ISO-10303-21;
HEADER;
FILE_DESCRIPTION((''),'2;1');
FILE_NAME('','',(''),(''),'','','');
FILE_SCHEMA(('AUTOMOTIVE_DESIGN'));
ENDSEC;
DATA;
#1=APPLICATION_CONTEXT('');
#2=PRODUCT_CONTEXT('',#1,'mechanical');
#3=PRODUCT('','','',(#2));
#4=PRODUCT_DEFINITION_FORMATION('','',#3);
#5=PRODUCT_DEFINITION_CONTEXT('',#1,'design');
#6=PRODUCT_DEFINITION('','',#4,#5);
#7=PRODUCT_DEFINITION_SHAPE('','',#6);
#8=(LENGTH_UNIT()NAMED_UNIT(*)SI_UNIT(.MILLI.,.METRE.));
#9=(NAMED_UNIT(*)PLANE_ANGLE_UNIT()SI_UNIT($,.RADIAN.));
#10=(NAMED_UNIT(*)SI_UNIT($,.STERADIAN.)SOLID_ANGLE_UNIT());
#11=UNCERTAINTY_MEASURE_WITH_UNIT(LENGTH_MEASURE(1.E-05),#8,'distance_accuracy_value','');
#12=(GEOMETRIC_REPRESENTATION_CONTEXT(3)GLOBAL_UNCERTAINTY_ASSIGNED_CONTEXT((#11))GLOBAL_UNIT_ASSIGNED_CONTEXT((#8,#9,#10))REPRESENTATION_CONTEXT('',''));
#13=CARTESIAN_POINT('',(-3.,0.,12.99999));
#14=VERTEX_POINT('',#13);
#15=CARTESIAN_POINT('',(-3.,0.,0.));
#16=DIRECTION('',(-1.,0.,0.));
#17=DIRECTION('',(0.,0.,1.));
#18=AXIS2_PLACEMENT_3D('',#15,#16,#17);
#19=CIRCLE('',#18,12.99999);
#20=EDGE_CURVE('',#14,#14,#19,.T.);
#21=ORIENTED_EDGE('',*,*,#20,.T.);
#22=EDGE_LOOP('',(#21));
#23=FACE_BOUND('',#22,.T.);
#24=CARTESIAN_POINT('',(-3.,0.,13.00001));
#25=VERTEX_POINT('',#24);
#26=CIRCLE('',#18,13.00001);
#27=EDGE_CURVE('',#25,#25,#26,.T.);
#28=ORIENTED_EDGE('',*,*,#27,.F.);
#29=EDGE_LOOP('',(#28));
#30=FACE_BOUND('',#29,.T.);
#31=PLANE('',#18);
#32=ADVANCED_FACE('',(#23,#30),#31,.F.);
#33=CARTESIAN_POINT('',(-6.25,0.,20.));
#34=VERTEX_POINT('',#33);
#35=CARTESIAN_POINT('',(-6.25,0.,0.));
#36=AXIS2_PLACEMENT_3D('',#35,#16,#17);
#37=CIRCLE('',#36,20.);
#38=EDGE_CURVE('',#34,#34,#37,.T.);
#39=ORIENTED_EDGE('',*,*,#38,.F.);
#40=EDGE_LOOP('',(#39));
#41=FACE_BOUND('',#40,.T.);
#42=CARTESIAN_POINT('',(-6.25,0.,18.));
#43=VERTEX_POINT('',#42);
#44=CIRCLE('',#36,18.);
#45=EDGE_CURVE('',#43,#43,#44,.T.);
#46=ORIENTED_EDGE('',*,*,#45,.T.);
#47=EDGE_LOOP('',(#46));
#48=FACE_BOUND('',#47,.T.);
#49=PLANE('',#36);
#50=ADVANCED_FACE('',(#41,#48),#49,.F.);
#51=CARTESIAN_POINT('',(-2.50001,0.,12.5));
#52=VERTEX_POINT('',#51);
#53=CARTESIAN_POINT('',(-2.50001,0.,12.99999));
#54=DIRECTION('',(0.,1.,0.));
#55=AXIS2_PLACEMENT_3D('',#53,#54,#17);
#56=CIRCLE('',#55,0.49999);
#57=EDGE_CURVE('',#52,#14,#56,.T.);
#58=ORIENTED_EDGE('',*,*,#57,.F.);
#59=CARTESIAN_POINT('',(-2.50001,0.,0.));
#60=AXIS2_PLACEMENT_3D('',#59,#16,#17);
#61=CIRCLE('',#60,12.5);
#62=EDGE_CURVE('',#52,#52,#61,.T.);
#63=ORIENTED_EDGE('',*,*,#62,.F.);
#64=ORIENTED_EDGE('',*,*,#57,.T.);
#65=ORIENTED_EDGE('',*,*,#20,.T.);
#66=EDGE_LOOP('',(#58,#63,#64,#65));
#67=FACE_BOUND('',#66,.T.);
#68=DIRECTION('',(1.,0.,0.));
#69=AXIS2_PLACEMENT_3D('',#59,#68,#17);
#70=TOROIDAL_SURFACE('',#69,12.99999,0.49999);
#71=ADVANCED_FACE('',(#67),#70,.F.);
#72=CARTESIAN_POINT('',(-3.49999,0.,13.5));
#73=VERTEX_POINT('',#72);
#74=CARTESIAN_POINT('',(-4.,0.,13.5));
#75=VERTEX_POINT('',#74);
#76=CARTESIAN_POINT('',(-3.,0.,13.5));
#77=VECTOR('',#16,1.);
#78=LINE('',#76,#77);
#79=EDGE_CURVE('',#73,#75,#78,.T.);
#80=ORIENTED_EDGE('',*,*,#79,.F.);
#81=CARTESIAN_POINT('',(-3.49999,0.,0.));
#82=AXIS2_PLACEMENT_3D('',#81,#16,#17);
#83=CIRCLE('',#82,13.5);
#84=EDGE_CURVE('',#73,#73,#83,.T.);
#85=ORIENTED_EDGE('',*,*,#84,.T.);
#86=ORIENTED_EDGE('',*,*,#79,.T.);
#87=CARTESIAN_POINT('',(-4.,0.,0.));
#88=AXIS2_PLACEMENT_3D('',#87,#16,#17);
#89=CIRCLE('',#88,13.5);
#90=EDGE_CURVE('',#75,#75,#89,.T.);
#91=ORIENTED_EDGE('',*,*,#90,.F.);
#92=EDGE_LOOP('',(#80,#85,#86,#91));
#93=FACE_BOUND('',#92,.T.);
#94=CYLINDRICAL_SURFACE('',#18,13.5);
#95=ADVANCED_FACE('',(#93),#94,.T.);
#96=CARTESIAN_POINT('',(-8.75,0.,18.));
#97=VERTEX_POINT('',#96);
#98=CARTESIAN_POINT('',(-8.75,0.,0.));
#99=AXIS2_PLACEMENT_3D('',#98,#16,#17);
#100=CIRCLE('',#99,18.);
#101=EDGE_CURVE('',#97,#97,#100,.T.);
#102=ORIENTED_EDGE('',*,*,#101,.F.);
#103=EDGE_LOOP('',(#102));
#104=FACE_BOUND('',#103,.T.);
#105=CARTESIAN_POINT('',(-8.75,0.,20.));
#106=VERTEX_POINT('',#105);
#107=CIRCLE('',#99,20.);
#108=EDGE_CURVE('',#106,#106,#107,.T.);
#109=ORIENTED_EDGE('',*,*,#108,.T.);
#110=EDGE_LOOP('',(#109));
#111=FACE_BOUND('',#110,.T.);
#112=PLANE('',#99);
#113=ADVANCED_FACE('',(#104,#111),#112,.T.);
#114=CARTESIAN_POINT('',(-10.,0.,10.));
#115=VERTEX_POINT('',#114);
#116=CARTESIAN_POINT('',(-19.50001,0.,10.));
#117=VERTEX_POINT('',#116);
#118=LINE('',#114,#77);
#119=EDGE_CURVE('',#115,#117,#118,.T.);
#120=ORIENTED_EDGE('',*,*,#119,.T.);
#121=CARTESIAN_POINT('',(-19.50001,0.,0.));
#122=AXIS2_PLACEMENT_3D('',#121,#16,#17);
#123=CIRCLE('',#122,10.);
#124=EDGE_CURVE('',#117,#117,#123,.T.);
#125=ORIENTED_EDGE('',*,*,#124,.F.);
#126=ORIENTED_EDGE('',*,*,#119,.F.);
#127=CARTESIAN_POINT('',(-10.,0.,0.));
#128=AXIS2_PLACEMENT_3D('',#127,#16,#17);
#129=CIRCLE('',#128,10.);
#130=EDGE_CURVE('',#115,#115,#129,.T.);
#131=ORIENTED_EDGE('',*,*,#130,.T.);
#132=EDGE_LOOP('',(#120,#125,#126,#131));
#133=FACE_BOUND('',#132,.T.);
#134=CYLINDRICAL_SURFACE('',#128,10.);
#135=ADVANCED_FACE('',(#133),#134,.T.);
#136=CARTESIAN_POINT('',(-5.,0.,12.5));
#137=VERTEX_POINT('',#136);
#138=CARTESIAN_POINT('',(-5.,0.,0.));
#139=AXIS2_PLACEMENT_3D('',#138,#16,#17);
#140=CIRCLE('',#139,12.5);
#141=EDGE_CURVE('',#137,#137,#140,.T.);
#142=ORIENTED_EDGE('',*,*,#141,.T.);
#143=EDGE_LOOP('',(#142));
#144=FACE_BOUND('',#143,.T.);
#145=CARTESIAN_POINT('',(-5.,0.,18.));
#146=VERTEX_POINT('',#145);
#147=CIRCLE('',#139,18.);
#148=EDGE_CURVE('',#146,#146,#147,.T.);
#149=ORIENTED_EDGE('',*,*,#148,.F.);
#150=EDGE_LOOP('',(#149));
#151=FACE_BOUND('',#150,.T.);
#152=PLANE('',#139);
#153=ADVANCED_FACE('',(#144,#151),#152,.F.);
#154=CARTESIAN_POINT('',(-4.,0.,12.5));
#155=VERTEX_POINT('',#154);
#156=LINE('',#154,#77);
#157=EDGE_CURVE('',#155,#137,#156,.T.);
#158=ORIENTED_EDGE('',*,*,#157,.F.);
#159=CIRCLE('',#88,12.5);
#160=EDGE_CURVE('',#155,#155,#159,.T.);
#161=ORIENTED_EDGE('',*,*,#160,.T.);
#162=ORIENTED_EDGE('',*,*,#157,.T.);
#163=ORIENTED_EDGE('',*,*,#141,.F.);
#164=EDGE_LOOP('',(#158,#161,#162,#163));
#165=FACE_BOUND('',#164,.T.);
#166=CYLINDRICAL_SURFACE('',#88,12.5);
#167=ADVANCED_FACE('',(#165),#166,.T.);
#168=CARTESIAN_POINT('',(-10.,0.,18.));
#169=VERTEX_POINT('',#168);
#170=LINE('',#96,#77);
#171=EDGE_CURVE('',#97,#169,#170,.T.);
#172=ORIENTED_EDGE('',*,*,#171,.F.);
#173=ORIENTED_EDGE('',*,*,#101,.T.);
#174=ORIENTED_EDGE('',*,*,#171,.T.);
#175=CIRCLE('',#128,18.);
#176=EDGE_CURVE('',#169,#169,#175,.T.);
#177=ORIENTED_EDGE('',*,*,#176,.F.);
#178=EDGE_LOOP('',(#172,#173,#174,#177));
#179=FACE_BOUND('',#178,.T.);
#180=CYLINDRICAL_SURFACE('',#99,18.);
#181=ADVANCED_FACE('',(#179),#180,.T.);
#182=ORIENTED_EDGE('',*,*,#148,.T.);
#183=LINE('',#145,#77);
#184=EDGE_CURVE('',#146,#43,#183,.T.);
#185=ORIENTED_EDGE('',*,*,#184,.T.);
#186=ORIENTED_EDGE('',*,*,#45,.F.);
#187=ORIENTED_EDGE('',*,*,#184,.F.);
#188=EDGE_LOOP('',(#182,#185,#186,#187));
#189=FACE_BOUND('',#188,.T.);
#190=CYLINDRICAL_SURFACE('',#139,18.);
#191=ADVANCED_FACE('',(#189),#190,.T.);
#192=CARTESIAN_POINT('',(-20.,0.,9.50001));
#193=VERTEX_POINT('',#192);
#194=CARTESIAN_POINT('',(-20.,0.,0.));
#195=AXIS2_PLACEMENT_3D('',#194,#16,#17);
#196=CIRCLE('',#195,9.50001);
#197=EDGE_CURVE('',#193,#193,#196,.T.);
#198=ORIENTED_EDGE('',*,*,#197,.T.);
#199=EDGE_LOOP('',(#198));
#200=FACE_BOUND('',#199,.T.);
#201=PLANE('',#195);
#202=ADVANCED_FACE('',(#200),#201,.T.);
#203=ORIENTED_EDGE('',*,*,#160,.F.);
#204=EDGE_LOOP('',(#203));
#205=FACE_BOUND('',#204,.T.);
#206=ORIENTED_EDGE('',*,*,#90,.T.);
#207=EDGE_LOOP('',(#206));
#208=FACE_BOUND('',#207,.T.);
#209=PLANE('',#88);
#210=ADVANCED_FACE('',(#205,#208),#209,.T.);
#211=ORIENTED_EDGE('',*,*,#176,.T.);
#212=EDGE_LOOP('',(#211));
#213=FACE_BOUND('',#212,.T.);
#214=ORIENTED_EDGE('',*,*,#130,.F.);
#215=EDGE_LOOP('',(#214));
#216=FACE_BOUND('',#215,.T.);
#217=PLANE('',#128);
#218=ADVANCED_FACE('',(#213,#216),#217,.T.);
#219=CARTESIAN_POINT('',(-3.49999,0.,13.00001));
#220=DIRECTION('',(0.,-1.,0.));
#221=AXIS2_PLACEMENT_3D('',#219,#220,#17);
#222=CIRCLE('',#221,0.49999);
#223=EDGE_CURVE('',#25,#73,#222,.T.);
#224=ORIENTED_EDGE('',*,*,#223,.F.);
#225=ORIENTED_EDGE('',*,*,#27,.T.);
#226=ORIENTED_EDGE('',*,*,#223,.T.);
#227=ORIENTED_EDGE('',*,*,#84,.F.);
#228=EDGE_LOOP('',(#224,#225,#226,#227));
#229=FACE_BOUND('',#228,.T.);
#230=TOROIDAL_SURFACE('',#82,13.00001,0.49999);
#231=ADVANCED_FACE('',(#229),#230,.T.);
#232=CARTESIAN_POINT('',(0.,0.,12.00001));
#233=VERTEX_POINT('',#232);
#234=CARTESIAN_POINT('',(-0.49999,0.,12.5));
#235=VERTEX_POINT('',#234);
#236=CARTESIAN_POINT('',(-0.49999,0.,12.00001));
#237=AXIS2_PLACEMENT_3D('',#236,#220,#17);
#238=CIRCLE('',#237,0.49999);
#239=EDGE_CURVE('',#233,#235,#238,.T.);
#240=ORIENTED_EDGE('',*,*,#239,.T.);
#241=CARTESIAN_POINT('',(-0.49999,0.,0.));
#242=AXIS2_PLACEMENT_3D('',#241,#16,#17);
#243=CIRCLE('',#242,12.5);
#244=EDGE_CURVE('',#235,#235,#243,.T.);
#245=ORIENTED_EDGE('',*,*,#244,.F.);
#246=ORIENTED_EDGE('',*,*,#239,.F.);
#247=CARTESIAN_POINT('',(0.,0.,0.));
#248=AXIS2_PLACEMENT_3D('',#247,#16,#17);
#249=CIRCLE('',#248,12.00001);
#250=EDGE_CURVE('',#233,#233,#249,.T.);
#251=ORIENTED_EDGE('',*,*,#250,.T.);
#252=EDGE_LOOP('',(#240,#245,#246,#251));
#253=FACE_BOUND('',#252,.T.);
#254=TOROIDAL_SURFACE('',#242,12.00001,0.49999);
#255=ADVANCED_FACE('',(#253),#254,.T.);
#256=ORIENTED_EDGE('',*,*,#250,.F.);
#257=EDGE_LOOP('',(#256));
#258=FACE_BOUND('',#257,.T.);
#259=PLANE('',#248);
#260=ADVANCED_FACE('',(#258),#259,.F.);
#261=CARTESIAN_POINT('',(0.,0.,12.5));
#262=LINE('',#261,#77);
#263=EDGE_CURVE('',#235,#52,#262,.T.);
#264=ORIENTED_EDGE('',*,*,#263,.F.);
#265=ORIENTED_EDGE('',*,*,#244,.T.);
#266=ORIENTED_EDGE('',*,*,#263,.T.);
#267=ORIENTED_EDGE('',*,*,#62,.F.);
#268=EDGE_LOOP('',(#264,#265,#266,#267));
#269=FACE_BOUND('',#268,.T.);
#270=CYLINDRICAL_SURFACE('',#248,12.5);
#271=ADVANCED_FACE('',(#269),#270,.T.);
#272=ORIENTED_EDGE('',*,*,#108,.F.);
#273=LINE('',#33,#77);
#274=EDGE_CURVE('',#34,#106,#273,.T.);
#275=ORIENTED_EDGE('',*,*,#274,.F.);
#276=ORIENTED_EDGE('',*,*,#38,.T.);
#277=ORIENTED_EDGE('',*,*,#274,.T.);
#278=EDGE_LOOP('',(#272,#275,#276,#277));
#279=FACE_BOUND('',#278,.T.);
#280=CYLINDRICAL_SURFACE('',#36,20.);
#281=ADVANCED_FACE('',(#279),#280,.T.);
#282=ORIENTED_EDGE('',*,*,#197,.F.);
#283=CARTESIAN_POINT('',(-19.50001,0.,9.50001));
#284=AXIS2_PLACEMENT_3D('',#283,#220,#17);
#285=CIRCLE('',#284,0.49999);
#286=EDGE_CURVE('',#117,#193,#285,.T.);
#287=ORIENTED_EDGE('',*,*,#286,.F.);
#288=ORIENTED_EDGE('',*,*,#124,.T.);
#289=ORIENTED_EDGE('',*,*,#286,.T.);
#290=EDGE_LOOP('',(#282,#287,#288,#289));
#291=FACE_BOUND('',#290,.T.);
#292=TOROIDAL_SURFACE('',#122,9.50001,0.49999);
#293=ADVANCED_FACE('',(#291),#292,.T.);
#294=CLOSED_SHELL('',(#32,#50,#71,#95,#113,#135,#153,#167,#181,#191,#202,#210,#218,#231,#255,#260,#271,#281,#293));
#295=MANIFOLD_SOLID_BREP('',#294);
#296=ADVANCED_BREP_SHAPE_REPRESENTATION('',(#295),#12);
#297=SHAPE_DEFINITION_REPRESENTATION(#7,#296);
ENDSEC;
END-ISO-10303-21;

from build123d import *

# Parameters (mm, degrees)
F2_R = 0.49999


# Not quite as in the source:
# - a fillet or chamfer is up to 0.001 mm smaller than in the source, because OpenCascade refuses the exact size


with BuildPart() as f1:
    # F0 (on Front) → F1 (revolve)
    with BuildSketch(Plane.XZ):
        Polygon((-20, 0), (0, 0), (0, 12.5), (-3, 12.5), (-3, 13.5), (-4, 13.5), (-4, 12.5), (-5, 12.5), (-5, 18), (-6.25, 18), (-6.25, 20), (-8.75, 20), (-8.75, 18), (-10, 18), (-10, 10), (-20, 10), align=None)
    revolve(axis=Axis((-10, 0, 0), (-1, 0, 0)))

    # F2 (radius 0.5 in the source; OpenCascade refuses exactly that, so slightly less here)
    f2_edges = [f1.edges().sort_by_distance(p)[0] for p in [
        (-20, 0, -10),
        (-3, 0, -13.5),
        (0, 0, -12.5),
        (-3, 0, -12.5),
        (-1.5, 0, 12.5),
    ]]
    fillet(f2_edges, radius=F2_R)


solid = f1.part
